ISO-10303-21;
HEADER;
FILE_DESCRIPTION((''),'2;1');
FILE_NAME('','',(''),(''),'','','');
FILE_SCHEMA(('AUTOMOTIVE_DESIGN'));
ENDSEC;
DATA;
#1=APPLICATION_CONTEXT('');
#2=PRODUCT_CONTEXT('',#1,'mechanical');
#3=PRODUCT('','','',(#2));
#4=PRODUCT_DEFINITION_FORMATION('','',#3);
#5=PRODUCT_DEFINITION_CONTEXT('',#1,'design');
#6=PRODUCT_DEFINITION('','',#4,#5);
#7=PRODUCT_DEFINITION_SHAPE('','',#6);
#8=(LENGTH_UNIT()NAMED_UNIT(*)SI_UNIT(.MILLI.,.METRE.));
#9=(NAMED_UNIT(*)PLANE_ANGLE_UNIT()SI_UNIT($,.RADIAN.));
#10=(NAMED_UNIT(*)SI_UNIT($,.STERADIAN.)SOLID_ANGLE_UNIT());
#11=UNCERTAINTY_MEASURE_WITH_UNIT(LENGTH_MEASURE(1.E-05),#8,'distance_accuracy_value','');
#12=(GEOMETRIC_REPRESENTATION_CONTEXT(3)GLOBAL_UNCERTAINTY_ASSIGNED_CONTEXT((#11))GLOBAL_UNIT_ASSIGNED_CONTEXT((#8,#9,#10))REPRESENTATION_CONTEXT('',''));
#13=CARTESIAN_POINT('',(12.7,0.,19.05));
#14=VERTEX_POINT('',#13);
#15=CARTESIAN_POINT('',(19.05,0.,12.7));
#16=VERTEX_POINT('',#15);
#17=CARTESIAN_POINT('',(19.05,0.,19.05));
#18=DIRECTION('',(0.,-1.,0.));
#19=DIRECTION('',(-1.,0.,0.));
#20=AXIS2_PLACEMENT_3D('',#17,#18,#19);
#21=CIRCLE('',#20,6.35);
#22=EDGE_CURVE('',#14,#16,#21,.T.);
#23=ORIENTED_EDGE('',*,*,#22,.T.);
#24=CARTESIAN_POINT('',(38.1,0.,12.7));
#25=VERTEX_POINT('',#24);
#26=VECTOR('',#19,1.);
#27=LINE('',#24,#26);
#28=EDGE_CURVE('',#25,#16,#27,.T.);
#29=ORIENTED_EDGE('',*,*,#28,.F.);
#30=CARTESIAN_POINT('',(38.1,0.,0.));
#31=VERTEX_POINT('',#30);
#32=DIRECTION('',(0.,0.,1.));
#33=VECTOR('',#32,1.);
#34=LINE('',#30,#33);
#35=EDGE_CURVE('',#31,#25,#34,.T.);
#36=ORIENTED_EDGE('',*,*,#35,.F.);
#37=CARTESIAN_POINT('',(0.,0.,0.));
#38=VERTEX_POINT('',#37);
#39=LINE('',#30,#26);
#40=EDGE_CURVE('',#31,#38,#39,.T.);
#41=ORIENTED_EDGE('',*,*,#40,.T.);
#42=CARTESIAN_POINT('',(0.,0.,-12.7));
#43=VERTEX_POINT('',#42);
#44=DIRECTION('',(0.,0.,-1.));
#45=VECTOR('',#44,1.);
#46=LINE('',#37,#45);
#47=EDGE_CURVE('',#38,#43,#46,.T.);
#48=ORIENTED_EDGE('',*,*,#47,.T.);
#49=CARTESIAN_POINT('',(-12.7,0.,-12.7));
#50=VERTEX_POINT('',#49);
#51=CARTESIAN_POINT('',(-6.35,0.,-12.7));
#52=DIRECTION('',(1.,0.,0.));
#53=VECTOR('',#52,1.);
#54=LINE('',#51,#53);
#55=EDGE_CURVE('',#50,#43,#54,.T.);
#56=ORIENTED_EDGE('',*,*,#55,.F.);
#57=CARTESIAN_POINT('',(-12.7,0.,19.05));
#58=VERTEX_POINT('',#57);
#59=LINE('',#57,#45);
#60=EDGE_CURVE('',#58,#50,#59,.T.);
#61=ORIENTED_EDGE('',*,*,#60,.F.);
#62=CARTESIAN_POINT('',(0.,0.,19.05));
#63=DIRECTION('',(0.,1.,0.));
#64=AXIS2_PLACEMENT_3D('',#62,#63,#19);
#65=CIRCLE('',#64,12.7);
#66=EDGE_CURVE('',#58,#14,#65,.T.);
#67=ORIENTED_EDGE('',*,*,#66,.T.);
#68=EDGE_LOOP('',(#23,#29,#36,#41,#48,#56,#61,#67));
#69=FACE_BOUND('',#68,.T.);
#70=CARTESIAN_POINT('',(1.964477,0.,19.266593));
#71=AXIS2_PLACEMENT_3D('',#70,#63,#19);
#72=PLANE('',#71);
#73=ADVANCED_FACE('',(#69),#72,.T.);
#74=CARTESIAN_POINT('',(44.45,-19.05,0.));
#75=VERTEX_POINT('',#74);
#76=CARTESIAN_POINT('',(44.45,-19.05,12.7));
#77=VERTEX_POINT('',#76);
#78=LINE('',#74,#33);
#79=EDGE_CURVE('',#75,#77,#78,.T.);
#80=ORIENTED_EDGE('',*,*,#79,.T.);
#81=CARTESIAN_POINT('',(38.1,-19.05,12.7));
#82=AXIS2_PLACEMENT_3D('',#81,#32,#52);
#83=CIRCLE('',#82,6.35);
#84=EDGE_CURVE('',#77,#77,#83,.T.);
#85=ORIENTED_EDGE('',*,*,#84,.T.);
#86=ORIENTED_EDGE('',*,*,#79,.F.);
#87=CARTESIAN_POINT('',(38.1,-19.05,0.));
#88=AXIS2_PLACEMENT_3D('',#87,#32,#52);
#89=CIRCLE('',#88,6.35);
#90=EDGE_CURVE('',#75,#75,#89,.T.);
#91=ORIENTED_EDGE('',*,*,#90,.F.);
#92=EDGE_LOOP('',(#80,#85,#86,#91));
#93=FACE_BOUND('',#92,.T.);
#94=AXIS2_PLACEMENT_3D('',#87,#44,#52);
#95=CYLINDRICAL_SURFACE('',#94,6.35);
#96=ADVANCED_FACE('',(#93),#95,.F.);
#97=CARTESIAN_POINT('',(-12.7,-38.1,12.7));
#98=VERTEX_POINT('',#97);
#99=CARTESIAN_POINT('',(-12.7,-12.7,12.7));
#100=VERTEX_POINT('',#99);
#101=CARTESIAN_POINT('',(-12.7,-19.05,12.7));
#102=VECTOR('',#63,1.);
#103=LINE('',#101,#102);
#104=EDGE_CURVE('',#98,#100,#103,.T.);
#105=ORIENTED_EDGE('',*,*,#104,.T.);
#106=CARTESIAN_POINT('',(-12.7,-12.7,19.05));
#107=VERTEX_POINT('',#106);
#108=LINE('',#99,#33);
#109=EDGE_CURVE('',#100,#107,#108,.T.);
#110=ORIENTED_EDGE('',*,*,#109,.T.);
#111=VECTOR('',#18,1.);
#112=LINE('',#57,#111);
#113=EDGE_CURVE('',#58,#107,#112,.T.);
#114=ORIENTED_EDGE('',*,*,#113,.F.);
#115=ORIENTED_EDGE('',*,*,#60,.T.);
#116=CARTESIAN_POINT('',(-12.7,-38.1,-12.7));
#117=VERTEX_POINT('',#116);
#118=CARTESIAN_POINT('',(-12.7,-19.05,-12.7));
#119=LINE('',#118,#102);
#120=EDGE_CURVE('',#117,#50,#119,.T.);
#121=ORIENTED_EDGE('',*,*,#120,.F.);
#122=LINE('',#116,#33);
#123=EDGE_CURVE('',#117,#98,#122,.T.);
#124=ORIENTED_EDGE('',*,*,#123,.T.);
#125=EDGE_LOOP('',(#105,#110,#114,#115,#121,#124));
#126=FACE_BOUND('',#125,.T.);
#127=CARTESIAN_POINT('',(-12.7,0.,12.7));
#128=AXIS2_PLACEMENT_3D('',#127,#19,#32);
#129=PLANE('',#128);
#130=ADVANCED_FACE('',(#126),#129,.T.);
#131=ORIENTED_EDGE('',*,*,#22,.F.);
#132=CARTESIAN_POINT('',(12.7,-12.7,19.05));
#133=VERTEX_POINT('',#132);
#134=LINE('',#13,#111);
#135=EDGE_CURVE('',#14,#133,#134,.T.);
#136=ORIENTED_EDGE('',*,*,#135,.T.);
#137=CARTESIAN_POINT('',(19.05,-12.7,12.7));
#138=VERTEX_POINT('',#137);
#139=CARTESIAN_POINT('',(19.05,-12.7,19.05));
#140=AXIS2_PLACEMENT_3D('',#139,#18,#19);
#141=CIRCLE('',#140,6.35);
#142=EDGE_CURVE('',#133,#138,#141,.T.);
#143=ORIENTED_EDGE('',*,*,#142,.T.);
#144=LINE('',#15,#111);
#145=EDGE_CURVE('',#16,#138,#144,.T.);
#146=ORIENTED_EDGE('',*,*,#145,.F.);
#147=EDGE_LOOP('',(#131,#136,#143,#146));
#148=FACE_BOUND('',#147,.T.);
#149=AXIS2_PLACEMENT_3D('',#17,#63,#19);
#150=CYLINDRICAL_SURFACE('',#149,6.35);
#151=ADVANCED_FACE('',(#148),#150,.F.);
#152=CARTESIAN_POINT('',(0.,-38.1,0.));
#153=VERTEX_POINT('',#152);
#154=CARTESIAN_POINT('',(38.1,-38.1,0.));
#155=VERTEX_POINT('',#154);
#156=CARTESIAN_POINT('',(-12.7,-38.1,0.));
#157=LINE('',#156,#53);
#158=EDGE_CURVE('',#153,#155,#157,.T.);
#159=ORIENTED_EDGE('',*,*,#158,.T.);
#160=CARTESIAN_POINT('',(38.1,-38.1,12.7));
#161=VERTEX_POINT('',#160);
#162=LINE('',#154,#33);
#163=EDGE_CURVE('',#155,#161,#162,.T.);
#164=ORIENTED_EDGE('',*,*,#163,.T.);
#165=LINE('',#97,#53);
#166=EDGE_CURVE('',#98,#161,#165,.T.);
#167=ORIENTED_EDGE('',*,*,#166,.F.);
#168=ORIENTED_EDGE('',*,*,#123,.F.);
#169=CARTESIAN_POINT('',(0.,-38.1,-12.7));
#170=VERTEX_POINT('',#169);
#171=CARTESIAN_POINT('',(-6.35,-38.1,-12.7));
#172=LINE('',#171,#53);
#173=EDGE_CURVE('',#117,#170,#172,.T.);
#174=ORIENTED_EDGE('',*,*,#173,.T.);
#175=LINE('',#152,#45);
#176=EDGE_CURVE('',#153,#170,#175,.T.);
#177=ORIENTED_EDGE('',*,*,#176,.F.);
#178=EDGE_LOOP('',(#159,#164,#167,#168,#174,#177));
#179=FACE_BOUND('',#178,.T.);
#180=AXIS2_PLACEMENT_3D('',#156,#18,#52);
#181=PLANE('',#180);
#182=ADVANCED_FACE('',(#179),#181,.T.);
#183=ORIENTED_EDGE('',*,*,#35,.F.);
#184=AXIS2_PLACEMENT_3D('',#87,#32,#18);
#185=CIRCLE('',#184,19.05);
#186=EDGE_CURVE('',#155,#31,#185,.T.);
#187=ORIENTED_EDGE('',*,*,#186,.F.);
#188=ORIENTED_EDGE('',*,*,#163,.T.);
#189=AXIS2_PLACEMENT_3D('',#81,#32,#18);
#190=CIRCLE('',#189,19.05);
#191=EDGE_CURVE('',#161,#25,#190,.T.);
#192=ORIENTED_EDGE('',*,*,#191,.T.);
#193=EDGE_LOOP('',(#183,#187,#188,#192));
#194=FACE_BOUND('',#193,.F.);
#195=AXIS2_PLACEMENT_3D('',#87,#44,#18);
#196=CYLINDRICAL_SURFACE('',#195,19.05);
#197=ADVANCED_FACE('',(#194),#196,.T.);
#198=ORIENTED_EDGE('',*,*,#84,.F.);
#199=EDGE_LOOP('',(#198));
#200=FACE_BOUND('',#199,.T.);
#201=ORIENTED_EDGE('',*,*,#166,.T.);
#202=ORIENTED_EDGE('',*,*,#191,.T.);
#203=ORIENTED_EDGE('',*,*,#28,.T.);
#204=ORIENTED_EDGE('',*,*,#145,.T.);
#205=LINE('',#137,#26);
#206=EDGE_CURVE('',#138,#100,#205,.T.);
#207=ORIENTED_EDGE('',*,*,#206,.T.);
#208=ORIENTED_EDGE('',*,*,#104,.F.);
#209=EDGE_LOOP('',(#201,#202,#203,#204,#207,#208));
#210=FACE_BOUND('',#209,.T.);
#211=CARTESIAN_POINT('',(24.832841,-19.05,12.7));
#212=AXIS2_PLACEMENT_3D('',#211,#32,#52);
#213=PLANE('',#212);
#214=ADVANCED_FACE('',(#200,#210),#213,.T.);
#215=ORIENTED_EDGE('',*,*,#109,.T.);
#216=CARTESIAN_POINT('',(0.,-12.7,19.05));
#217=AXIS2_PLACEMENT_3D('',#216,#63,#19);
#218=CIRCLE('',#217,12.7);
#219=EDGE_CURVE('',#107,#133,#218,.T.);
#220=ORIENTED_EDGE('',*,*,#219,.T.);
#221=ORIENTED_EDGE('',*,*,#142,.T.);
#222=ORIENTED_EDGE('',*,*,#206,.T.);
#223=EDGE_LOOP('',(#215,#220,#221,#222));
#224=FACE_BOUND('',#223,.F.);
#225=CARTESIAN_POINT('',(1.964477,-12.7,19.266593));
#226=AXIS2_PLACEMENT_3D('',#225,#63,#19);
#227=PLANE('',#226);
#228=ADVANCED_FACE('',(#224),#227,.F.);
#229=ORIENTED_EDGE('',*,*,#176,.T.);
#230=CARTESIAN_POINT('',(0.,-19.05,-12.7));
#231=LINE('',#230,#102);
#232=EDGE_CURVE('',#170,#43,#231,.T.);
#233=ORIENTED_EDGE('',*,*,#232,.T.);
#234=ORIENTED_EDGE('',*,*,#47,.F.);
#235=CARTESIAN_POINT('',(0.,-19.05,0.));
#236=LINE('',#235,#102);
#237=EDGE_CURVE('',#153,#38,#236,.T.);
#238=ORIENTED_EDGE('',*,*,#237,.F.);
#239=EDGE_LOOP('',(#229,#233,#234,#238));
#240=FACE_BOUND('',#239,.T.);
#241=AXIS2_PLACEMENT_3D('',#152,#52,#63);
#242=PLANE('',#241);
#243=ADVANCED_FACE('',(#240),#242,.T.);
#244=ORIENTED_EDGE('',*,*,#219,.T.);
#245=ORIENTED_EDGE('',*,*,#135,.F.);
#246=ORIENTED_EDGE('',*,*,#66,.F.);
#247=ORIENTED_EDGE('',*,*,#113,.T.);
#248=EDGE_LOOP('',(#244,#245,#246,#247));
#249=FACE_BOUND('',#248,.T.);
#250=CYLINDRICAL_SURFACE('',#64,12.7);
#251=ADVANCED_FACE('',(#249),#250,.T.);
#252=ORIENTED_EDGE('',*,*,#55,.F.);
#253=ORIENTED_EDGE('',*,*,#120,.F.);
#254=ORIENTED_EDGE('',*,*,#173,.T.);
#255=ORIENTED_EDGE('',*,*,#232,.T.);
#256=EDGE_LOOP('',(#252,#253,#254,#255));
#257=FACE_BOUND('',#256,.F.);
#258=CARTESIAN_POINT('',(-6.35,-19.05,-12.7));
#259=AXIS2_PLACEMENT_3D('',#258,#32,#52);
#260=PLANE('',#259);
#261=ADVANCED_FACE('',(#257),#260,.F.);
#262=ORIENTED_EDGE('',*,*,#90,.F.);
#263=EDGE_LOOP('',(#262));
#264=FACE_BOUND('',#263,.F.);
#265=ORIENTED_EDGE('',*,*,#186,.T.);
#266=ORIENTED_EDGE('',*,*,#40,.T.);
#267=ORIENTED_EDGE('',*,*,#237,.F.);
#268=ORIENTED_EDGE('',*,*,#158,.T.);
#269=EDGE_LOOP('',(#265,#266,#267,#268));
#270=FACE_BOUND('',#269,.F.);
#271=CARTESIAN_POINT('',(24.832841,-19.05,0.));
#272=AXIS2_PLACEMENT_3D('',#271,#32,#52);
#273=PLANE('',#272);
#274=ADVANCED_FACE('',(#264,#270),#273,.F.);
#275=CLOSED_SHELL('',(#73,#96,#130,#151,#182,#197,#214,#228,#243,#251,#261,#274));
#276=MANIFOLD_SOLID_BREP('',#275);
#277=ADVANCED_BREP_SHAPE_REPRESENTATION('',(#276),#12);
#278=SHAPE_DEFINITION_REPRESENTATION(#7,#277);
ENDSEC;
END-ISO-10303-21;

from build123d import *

# Parameters (mm, degrees)
F0_R     = 6.35
F0_W     = 12.7
F0_H     = 38.1
F1_DEPTH = 12.7
F2_DEPTH = 12.7
F4_DEPTH = 12.7


# Not quite as in the source:
# - a feature names something its author has since deleted; it is built from what else it names


with BuildPart() as f1:
    # F0 (on Top) → F1 (new body)
    with BuildSketch(Plane.XY):
        with BuildLine():
            Line((38.1, 0), (0, 0))
            Line((0, 0), (0, -38.1))
            Line((0, -38.1), (38.1, -38.1))
            ThreePointArc((38.1, -38.1), (57.15, -19.05), (38.1, 0))
        make_face()
        with Locations((38.1, -19.05)):
            Circle(F0_R, mode=Mode.SUBTRACT)
        with Locations((-6.35, -19.05)):
            Rectangle(F0_W, F0_H)
    extrude(amount=F1_DEPTH)

    # F0 (on Top) → F2 (join)
    with BuildSketch(Plane.XY):
        with Locations((-6.35, -19.05)):
            Rectangle(F0_W, F0_H)
    extrude(amount=-F2_DEPTH)

    # F3 (on face) → F4 (join)
    with BuildSketch(Plane(origin=(0, 0, 0), x_dir=(-1, 0, 0), z_dir=(0, 1, 0))):
        with BuildLine():
            Line((-19.05, 12.7), (12.7, 12.7))
            Line((12.7, 12.7), (12.7, 19.05))
            ThreePointArc((12.7, 19.05), (0, 31.75), (-12.7, 19.05))
            ThreePointArc((-12.7, 19.05), (-14.5598719395, 14.5598719395), (-19.05, 12.7))
        make_face()
    extrude(amount=-F4_DEPTH)


solid = f1.part
